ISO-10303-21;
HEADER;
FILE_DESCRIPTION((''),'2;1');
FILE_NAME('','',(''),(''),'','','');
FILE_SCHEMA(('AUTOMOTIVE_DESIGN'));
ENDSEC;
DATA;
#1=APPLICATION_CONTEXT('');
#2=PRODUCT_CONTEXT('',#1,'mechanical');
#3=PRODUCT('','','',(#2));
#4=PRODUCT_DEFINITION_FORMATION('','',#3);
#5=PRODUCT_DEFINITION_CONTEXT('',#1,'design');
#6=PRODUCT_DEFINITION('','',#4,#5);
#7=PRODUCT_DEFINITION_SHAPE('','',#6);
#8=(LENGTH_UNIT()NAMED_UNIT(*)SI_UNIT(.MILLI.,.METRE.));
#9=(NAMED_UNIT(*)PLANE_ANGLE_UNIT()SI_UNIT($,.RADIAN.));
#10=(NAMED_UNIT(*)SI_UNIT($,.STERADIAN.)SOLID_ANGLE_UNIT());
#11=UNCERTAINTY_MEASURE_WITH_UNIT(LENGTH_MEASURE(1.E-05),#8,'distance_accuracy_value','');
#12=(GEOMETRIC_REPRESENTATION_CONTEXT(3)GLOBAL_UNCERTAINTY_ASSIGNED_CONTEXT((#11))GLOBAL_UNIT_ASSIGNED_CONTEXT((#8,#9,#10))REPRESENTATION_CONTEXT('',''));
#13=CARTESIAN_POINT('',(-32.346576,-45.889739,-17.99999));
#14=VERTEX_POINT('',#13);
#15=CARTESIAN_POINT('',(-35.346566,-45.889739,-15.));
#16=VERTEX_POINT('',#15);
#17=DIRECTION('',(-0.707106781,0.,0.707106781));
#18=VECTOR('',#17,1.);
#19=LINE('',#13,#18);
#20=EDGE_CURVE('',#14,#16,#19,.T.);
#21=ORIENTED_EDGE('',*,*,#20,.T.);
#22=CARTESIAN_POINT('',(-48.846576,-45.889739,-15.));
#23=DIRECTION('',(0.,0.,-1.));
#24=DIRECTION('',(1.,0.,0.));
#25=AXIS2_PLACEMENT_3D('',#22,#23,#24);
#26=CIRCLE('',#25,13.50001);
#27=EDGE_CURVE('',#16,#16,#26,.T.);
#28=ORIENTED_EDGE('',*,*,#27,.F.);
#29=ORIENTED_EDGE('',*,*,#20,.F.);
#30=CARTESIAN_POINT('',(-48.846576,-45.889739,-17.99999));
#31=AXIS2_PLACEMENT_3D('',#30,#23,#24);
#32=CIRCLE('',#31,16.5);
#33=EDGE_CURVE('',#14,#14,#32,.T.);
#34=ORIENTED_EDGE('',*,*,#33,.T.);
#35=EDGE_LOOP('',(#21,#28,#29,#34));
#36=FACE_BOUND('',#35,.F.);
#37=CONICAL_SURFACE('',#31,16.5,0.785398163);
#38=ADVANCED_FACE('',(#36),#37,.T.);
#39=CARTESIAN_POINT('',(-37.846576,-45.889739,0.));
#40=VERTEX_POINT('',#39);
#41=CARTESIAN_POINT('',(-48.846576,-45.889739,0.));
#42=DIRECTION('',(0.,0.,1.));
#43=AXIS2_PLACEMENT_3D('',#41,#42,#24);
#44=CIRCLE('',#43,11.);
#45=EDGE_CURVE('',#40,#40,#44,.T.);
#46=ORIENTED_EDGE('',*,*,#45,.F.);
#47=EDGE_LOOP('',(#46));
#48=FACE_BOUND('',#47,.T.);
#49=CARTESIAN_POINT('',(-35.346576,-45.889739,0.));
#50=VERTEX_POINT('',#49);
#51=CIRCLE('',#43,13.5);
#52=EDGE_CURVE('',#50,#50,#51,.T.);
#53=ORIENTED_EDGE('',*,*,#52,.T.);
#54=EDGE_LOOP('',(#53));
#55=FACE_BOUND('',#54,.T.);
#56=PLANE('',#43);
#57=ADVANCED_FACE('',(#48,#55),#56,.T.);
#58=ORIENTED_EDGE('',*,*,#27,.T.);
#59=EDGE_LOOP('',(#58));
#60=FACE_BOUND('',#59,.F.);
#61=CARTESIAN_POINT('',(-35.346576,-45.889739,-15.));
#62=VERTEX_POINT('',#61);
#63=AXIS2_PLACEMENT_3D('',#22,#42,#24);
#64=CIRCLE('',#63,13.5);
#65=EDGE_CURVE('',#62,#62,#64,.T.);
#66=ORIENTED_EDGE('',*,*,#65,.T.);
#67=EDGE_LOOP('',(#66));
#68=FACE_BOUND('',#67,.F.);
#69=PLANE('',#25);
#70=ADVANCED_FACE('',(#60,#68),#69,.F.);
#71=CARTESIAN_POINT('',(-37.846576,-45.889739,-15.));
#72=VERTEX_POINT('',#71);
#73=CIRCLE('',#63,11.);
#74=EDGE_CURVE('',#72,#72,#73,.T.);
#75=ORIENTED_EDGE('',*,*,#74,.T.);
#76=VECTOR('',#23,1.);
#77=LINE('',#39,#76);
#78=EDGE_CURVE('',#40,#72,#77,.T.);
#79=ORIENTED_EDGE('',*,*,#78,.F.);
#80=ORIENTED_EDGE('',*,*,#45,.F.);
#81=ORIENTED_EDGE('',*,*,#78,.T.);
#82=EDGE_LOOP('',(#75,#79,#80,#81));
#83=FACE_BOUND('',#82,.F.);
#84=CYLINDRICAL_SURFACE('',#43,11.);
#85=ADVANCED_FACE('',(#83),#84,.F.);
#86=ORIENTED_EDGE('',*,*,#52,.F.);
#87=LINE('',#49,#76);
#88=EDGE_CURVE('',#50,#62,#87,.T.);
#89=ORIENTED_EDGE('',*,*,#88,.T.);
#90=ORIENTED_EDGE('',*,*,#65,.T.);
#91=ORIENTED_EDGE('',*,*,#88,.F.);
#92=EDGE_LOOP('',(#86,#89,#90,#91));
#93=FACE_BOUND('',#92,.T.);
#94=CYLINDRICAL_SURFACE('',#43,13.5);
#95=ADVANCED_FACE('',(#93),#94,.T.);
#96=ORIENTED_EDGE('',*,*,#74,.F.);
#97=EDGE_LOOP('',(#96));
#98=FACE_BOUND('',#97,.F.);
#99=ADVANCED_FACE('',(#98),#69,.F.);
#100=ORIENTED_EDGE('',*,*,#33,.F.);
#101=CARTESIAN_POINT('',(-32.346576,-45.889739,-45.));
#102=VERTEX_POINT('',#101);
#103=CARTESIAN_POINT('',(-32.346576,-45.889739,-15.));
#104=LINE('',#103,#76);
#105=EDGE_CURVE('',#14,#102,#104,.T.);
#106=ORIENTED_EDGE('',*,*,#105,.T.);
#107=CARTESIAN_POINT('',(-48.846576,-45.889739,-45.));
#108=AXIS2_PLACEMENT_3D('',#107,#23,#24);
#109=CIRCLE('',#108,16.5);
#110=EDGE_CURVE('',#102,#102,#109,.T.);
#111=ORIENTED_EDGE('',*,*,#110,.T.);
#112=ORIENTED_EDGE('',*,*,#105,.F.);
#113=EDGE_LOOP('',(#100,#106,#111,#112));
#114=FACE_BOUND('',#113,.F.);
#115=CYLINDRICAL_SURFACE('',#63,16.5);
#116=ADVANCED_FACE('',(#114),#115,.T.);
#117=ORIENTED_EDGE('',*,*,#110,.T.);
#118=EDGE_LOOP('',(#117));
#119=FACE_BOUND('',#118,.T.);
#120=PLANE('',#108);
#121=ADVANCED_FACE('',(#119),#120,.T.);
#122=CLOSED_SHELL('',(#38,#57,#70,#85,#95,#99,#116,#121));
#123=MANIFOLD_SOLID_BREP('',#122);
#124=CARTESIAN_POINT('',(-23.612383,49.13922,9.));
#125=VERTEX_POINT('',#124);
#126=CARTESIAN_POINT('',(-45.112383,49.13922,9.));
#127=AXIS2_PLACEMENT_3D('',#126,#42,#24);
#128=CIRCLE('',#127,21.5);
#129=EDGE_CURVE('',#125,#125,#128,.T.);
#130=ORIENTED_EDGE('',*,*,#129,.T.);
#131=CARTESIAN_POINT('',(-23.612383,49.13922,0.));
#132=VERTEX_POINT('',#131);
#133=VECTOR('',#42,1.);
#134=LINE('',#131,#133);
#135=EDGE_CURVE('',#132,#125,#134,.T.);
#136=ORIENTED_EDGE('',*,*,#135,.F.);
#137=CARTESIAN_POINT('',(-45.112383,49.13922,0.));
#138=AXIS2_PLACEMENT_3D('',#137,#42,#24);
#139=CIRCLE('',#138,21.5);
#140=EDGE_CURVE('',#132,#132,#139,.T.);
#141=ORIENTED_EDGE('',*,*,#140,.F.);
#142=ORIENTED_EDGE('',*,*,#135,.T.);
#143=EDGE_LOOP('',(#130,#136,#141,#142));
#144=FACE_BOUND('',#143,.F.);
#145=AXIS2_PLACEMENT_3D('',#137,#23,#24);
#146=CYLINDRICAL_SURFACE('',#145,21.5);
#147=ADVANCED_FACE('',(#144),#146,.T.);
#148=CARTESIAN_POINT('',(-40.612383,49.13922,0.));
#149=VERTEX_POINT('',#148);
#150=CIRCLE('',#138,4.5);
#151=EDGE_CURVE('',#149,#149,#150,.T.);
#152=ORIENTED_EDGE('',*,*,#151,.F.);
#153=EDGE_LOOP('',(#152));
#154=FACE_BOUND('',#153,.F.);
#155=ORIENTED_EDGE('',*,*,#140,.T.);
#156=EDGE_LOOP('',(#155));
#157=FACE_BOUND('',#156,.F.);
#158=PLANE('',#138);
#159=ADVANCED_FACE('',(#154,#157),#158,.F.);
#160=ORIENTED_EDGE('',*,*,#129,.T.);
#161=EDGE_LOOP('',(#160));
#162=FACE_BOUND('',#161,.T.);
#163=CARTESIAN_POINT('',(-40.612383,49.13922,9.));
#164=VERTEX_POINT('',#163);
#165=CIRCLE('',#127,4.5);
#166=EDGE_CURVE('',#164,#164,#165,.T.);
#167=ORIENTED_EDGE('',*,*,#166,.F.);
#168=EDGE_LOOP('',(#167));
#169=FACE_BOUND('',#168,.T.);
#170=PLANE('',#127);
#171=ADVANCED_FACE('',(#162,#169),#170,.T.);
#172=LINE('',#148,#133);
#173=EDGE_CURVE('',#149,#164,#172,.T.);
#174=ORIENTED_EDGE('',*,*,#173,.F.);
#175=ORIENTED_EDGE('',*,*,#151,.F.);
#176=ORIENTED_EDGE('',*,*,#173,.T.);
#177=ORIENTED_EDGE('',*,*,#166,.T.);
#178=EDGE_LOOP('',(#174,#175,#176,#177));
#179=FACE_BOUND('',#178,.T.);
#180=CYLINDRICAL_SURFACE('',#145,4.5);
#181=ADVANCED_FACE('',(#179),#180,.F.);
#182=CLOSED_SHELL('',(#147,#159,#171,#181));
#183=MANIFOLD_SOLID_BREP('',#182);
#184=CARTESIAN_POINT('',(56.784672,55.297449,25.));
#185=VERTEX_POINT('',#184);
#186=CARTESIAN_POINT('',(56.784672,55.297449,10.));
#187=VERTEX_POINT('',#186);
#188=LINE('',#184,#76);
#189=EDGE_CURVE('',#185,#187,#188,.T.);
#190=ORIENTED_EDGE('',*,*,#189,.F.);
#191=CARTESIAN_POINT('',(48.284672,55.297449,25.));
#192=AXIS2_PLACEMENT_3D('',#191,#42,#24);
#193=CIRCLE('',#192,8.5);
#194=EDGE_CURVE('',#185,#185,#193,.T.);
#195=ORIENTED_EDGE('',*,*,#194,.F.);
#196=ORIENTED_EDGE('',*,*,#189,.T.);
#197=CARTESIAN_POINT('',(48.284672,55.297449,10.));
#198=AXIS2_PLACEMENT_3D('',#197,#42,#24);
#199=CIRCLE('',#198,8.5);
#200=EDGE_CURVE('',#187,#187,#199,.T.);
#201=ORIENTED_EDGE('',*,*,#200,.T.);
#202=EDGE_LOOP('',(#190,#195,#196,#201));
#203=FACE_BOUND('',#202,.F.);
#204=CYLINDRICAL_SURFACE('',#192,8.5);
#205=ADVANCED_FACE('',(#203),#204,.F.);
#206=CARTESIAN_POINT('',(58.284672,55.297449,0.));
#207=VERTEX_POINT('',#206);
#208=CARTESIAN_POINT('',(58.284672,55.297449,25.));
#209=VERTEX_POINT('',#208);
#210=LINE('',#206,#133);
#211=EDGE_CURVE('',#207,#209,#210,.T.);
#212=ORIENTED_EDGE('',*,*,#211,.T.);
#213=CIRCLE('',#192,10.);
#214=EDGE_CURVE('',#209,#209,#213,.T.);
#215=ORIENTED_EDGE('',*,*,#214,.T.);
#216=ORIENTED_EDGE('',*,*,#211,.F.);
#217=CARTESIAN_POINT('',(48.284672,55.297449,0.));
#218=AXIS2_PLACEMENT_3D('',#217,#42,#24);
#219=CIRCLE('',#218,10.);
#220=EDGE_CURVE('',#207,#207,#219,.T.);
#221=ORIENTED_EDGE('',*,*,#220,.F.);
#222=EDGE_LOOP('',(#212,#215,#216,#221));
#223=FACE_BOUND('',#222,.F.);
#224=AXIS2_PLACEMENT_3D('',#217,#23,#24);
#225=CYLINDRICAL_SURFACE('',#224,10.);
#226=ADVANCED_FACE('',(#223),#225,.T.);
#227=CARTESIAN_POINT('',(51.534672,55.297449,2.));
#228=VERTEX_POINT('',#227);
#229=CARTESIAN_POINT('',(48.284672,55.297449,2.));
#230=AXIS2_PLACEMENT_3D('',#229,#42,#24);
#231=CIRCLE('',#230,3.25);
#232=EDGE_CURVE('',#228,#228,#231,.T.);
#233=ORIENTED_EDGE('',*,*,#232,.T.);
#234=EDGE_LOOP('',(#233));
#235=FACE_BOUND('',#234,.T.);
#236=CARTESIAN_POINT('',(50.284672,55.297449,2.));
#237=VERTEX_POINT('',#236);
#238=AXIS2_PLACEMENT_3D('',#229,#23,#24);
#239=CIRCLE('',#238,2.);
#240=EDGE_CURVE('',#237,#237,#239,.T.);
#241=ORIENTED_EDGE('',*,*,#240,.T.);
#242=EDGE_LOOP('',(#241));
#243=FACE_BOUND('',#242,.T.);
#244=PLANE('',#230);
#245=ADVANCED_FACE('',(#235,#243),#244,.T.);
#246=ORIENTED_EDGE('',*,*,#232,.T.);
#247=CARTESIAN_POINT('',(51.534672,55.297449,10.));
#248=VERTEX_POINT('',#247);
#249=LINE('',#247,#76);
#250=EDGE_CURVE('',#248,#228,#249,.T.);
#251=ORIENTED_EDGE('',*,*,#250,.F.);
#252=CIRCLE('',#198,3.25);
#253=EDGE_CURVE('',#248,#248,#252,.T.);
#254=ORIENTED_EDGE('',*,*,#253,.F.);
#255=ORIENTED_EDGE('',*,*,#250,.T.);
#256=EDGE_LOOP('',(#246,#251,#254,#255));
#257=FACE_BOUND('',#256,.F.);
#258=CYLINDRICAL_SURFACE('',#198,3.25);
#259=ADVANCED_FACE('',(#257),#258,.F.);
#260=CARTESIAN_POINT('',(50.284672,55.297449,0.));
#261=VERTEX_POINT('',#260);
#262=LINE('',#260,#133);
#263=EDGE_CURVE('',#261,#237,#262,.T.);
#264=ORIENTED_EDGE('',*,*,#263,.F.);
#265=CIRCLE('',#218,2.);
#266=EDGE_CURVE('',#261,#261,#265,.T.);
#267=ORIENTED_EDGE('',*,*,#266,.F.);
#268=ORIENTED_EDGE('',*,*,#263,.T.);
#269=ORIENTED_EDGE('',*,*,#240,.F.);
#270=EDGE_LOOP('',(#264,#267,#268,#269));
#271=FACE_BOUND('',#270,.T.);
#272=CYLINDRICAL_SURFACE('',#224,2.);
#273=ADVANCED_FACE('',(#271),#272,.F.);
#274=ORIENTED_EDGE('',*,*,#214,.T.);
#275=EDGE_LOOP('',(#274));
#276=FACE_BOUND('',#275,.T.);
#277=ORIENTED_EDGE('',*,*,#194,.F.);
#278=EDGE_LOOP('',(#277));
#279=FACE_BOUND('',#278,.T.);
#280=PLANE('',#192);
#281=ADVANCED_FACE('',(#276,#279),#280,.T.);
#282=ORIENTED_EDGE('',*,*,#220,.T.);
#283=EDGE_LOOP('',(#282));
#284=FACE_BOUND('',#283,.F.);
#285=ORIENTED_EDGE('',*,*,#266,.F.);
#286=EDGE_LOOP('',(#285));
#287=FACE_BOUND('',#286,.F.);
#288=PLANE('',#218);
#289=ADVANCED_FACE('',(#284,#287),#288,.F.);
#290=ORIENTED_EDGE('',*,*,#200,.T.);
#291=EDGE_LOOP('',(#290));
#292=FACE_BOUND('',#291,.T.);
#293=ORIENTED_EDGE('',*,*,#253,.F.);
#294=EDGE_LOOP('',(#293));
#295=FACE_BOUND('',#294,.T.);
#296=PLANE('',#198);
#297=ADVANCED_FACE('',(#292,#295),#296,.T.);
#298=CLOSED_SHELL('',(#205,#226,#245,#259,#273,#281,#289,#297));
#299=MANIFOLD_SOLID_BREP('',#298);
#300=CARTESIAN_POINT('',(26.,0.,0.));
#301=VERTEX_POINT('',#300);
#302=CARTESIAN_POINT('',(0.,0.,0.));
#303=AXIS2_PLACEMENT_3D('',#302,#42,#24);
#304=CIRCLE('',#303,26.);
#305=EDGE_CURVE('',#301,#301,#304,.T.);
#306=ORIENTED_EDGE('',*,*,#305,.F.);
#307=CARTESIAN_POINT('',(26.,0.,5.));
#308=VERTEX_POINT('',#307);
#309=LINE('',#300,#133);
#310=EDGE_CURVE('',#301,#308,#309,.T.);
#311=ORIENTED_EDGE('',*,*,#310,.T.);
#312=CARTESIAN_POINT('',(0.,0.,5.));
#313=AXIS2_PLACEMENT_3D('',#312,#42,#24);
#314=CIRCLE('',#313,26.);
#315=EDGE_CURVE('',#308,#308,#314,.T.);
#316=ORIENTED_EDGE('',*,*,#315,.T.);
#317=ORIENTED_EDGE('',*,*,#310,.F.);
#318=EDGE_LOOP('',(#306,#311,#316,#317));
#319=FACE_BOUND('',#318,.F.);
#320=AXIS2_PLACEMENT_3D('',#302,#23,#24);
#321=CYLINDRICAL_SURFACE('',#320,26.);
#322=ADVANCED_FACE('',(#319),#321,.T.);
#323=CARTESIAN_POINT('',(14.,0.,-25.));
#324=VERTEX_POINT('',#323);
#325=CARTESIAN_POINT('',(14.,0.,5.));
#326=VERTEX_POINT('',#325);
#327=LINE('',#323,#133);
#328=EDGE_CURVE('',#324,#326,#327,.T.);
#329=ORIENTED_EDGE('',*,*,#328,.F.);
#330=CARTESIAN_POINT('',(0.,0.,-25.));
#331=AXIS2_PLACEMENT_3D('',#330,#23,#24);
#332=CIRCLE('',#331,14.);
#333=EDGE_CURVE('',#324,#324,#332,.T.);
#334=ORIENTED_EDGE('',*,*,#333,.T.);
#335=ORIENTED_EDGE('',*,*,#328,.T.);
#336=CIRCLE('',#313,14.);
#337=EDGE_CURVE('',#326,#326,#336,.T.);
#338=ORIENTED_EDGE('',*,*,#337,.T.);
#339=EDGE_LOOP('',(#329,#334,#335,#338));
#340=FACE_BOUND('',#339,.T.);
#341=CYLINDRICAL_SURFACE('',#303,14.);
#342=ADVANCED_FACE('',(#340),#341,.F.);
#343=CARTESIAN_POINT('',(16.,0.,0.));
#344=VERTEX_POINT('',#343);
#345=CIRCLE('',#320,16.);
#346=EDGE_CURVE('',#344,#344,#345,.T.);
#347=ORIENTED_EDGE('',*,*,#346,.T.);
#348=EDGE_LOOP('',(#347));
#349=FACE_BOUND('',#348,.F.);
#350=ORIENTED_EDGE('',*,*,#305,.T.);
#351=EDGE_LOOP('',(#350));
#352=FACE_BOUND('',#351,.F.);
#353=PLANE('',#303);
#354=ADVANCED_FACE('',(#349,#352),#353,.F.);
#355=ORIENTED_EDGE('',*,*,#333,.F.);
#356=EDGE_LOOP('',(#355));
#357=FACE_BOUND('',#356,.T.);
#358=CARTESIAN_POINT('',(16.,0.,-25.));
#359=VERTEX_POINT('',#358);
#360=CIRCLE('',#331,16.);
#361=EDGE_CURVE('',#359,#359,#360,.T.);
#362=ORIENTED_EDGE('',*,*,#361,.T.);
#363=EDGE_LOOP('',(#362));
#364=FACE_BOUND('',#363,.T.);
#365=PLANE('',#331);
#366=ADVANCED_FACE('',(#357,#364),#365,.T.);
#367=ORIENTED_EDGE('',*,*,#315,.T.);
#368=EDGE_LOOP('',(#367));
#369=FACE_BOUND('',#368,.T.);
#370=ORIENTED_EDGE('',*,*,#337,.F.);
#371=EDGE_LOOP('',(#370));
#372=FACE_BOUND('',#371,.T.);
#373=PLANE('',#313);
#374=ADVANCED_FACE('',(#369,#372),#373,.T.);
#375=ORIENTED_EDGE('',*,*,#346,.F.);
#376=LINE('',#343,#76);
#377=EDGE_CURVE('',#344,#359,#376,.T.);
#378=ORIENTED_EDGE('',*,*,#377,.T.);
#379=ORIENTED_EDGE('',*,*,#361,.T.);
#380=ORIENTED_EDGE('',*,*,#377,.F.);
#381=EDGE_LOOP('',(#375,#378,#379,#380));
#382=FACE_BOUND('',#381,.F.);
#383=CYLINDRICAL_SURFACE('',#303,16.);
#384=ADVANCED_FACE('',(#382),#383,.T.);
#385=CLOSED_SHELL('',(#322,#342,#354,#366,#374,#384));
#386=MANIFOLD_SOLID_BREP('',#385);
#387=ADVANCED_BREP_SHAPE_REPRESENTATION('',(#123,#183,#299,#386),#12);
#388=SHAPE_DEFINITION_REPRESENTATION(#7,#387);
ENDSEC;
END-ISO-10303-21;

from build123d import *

# Parameters (mm, degrees)
F0_R      = 26
F0_R_2    = 14
F1_DEPTH  = 5
F2_R      = 16
F2_R_2    = 14
F3_DEPTH  = 25
F4_R      = 13.5
F4_R_2    = 11
F5_DEPTH  = 15
F6_R      = 16.5
F7_DEPTH  = 30
F8_SIZE2  = 2.99999
F8_SIZE   = 2.99999
F9_R      = 10
F9_R_2    = 2
F10_DEPTH = 25
F11_R     = 8.5
F12_DEPTH = 15
F13_R     = 3.25
F14_DEPTH = 8
F15_R     = 21.5
F15_R_2   = 4.5
F16_DEPTH = 9


# Not quite as in the source:
# - a fillet or chamfer is up to 0.001 mm smaller than in the source, because OpenCascade refuses the exact size


with BuildPart() as f1:
    # F0 (on Top) → F1 (new body)
    with BuildSketch(Plane.XY):
        Circle(F0_R)
        Circle(F0_R_2, mode=Mode.SUBTRACT)
    extrude(amount=F1_DEPTH)

    # F2 (on face) → F3 (join)
    with BuildSketch(Plane(origin=(0, 0, 0), x_dir=(1, 0, 0), z_dir=(0, 0, -1))):
        Circle(F2_R)
        Circle(F2_R_2, mode=Mode.SUBTRACT)
    extrude(amount=F3_DEPTH)


with BuildPart() as f5:
    # F4 (on Top) → F5 (new body)
    with BuildSketch(Plane.XY):
        with Locations((-48.8465763628, -45.8897389472)):
            Circle(F4_R)
        with Locations((-48.8465763628, -45.8897389472)):
            Circle(F4_R_2, mode=Mode.SUBTRACT)
    extrude(amount=-F5_DEPTH)

    # F6 (on face) → F7 (join)
    with BuildSketch(Plane(origin=(0, 0, -15), x_dir=(1, 0, 0), z_dir=(0, 0, -1))):
        with Locations((-48.8465763628, 45.8897389472)):
            Circle(F6_R)
    extrude(amount=F7_DEPTH)

    # F8 (size 3 and 3 in the source; OpenCascade refuses exactly that, so slightly less here)
    f8_edges = [f5.edges().sort_by_distance(p)[0] for p in [
        (-65.346576, -45.889739, -15),
    ]]
    chamfer(f8_edges, length=F8_SIZE, length2=F8_SIZE2)


with BuildPart() as f10:
    # F9 (on Top) → F10 (new body)
    with BuildSketch(Plane.XY):
        with Locations((48.2846722007, 55.2974492311)):
            Circle(F9_R)
        with Locations((48.2846722007, 55.2974492311)):
            Circle(F9_R_2, mode=Mode.SUBTRACT)
    extrude(amount=F10_DEPTH)

    # F11 (on face) → F12 (cut)
    with BuildSketch(Plane.XY.offset(25)):
        with Locations((48.2846722007, 55.2974492311)):
            Circle(F11_R)
    extrude(amount=-F12_DEPTH, mode=Mode.SUBTRACT)

    # F13 (on face) → F14 (cut)
    with BuildSketch(Plane.XY.offset(10)):
        with Locations((48.2846722007, 55.2974492311)):
            Circle(F13_R)
    extrude(amount=-F14_DEPTH, mode=Mode.SUBTRACT)


with BuildPart() as f16:
    # F15 (on Top) → F16 (new body)
    with BuildSketch(Plane.XY):
        with Locations((-45.1123826206, 49.1392202675)):
            Circle(F15_R)
        with Locations((-45.1123826206, 49.1392202675)):
            Circle(F15_R_2, mode=Mode.SUBTRACT)
    extrude(amount=F16_DEPTH)


solid = Compound([f1.part, f5.part, f10.part, f16.part])
